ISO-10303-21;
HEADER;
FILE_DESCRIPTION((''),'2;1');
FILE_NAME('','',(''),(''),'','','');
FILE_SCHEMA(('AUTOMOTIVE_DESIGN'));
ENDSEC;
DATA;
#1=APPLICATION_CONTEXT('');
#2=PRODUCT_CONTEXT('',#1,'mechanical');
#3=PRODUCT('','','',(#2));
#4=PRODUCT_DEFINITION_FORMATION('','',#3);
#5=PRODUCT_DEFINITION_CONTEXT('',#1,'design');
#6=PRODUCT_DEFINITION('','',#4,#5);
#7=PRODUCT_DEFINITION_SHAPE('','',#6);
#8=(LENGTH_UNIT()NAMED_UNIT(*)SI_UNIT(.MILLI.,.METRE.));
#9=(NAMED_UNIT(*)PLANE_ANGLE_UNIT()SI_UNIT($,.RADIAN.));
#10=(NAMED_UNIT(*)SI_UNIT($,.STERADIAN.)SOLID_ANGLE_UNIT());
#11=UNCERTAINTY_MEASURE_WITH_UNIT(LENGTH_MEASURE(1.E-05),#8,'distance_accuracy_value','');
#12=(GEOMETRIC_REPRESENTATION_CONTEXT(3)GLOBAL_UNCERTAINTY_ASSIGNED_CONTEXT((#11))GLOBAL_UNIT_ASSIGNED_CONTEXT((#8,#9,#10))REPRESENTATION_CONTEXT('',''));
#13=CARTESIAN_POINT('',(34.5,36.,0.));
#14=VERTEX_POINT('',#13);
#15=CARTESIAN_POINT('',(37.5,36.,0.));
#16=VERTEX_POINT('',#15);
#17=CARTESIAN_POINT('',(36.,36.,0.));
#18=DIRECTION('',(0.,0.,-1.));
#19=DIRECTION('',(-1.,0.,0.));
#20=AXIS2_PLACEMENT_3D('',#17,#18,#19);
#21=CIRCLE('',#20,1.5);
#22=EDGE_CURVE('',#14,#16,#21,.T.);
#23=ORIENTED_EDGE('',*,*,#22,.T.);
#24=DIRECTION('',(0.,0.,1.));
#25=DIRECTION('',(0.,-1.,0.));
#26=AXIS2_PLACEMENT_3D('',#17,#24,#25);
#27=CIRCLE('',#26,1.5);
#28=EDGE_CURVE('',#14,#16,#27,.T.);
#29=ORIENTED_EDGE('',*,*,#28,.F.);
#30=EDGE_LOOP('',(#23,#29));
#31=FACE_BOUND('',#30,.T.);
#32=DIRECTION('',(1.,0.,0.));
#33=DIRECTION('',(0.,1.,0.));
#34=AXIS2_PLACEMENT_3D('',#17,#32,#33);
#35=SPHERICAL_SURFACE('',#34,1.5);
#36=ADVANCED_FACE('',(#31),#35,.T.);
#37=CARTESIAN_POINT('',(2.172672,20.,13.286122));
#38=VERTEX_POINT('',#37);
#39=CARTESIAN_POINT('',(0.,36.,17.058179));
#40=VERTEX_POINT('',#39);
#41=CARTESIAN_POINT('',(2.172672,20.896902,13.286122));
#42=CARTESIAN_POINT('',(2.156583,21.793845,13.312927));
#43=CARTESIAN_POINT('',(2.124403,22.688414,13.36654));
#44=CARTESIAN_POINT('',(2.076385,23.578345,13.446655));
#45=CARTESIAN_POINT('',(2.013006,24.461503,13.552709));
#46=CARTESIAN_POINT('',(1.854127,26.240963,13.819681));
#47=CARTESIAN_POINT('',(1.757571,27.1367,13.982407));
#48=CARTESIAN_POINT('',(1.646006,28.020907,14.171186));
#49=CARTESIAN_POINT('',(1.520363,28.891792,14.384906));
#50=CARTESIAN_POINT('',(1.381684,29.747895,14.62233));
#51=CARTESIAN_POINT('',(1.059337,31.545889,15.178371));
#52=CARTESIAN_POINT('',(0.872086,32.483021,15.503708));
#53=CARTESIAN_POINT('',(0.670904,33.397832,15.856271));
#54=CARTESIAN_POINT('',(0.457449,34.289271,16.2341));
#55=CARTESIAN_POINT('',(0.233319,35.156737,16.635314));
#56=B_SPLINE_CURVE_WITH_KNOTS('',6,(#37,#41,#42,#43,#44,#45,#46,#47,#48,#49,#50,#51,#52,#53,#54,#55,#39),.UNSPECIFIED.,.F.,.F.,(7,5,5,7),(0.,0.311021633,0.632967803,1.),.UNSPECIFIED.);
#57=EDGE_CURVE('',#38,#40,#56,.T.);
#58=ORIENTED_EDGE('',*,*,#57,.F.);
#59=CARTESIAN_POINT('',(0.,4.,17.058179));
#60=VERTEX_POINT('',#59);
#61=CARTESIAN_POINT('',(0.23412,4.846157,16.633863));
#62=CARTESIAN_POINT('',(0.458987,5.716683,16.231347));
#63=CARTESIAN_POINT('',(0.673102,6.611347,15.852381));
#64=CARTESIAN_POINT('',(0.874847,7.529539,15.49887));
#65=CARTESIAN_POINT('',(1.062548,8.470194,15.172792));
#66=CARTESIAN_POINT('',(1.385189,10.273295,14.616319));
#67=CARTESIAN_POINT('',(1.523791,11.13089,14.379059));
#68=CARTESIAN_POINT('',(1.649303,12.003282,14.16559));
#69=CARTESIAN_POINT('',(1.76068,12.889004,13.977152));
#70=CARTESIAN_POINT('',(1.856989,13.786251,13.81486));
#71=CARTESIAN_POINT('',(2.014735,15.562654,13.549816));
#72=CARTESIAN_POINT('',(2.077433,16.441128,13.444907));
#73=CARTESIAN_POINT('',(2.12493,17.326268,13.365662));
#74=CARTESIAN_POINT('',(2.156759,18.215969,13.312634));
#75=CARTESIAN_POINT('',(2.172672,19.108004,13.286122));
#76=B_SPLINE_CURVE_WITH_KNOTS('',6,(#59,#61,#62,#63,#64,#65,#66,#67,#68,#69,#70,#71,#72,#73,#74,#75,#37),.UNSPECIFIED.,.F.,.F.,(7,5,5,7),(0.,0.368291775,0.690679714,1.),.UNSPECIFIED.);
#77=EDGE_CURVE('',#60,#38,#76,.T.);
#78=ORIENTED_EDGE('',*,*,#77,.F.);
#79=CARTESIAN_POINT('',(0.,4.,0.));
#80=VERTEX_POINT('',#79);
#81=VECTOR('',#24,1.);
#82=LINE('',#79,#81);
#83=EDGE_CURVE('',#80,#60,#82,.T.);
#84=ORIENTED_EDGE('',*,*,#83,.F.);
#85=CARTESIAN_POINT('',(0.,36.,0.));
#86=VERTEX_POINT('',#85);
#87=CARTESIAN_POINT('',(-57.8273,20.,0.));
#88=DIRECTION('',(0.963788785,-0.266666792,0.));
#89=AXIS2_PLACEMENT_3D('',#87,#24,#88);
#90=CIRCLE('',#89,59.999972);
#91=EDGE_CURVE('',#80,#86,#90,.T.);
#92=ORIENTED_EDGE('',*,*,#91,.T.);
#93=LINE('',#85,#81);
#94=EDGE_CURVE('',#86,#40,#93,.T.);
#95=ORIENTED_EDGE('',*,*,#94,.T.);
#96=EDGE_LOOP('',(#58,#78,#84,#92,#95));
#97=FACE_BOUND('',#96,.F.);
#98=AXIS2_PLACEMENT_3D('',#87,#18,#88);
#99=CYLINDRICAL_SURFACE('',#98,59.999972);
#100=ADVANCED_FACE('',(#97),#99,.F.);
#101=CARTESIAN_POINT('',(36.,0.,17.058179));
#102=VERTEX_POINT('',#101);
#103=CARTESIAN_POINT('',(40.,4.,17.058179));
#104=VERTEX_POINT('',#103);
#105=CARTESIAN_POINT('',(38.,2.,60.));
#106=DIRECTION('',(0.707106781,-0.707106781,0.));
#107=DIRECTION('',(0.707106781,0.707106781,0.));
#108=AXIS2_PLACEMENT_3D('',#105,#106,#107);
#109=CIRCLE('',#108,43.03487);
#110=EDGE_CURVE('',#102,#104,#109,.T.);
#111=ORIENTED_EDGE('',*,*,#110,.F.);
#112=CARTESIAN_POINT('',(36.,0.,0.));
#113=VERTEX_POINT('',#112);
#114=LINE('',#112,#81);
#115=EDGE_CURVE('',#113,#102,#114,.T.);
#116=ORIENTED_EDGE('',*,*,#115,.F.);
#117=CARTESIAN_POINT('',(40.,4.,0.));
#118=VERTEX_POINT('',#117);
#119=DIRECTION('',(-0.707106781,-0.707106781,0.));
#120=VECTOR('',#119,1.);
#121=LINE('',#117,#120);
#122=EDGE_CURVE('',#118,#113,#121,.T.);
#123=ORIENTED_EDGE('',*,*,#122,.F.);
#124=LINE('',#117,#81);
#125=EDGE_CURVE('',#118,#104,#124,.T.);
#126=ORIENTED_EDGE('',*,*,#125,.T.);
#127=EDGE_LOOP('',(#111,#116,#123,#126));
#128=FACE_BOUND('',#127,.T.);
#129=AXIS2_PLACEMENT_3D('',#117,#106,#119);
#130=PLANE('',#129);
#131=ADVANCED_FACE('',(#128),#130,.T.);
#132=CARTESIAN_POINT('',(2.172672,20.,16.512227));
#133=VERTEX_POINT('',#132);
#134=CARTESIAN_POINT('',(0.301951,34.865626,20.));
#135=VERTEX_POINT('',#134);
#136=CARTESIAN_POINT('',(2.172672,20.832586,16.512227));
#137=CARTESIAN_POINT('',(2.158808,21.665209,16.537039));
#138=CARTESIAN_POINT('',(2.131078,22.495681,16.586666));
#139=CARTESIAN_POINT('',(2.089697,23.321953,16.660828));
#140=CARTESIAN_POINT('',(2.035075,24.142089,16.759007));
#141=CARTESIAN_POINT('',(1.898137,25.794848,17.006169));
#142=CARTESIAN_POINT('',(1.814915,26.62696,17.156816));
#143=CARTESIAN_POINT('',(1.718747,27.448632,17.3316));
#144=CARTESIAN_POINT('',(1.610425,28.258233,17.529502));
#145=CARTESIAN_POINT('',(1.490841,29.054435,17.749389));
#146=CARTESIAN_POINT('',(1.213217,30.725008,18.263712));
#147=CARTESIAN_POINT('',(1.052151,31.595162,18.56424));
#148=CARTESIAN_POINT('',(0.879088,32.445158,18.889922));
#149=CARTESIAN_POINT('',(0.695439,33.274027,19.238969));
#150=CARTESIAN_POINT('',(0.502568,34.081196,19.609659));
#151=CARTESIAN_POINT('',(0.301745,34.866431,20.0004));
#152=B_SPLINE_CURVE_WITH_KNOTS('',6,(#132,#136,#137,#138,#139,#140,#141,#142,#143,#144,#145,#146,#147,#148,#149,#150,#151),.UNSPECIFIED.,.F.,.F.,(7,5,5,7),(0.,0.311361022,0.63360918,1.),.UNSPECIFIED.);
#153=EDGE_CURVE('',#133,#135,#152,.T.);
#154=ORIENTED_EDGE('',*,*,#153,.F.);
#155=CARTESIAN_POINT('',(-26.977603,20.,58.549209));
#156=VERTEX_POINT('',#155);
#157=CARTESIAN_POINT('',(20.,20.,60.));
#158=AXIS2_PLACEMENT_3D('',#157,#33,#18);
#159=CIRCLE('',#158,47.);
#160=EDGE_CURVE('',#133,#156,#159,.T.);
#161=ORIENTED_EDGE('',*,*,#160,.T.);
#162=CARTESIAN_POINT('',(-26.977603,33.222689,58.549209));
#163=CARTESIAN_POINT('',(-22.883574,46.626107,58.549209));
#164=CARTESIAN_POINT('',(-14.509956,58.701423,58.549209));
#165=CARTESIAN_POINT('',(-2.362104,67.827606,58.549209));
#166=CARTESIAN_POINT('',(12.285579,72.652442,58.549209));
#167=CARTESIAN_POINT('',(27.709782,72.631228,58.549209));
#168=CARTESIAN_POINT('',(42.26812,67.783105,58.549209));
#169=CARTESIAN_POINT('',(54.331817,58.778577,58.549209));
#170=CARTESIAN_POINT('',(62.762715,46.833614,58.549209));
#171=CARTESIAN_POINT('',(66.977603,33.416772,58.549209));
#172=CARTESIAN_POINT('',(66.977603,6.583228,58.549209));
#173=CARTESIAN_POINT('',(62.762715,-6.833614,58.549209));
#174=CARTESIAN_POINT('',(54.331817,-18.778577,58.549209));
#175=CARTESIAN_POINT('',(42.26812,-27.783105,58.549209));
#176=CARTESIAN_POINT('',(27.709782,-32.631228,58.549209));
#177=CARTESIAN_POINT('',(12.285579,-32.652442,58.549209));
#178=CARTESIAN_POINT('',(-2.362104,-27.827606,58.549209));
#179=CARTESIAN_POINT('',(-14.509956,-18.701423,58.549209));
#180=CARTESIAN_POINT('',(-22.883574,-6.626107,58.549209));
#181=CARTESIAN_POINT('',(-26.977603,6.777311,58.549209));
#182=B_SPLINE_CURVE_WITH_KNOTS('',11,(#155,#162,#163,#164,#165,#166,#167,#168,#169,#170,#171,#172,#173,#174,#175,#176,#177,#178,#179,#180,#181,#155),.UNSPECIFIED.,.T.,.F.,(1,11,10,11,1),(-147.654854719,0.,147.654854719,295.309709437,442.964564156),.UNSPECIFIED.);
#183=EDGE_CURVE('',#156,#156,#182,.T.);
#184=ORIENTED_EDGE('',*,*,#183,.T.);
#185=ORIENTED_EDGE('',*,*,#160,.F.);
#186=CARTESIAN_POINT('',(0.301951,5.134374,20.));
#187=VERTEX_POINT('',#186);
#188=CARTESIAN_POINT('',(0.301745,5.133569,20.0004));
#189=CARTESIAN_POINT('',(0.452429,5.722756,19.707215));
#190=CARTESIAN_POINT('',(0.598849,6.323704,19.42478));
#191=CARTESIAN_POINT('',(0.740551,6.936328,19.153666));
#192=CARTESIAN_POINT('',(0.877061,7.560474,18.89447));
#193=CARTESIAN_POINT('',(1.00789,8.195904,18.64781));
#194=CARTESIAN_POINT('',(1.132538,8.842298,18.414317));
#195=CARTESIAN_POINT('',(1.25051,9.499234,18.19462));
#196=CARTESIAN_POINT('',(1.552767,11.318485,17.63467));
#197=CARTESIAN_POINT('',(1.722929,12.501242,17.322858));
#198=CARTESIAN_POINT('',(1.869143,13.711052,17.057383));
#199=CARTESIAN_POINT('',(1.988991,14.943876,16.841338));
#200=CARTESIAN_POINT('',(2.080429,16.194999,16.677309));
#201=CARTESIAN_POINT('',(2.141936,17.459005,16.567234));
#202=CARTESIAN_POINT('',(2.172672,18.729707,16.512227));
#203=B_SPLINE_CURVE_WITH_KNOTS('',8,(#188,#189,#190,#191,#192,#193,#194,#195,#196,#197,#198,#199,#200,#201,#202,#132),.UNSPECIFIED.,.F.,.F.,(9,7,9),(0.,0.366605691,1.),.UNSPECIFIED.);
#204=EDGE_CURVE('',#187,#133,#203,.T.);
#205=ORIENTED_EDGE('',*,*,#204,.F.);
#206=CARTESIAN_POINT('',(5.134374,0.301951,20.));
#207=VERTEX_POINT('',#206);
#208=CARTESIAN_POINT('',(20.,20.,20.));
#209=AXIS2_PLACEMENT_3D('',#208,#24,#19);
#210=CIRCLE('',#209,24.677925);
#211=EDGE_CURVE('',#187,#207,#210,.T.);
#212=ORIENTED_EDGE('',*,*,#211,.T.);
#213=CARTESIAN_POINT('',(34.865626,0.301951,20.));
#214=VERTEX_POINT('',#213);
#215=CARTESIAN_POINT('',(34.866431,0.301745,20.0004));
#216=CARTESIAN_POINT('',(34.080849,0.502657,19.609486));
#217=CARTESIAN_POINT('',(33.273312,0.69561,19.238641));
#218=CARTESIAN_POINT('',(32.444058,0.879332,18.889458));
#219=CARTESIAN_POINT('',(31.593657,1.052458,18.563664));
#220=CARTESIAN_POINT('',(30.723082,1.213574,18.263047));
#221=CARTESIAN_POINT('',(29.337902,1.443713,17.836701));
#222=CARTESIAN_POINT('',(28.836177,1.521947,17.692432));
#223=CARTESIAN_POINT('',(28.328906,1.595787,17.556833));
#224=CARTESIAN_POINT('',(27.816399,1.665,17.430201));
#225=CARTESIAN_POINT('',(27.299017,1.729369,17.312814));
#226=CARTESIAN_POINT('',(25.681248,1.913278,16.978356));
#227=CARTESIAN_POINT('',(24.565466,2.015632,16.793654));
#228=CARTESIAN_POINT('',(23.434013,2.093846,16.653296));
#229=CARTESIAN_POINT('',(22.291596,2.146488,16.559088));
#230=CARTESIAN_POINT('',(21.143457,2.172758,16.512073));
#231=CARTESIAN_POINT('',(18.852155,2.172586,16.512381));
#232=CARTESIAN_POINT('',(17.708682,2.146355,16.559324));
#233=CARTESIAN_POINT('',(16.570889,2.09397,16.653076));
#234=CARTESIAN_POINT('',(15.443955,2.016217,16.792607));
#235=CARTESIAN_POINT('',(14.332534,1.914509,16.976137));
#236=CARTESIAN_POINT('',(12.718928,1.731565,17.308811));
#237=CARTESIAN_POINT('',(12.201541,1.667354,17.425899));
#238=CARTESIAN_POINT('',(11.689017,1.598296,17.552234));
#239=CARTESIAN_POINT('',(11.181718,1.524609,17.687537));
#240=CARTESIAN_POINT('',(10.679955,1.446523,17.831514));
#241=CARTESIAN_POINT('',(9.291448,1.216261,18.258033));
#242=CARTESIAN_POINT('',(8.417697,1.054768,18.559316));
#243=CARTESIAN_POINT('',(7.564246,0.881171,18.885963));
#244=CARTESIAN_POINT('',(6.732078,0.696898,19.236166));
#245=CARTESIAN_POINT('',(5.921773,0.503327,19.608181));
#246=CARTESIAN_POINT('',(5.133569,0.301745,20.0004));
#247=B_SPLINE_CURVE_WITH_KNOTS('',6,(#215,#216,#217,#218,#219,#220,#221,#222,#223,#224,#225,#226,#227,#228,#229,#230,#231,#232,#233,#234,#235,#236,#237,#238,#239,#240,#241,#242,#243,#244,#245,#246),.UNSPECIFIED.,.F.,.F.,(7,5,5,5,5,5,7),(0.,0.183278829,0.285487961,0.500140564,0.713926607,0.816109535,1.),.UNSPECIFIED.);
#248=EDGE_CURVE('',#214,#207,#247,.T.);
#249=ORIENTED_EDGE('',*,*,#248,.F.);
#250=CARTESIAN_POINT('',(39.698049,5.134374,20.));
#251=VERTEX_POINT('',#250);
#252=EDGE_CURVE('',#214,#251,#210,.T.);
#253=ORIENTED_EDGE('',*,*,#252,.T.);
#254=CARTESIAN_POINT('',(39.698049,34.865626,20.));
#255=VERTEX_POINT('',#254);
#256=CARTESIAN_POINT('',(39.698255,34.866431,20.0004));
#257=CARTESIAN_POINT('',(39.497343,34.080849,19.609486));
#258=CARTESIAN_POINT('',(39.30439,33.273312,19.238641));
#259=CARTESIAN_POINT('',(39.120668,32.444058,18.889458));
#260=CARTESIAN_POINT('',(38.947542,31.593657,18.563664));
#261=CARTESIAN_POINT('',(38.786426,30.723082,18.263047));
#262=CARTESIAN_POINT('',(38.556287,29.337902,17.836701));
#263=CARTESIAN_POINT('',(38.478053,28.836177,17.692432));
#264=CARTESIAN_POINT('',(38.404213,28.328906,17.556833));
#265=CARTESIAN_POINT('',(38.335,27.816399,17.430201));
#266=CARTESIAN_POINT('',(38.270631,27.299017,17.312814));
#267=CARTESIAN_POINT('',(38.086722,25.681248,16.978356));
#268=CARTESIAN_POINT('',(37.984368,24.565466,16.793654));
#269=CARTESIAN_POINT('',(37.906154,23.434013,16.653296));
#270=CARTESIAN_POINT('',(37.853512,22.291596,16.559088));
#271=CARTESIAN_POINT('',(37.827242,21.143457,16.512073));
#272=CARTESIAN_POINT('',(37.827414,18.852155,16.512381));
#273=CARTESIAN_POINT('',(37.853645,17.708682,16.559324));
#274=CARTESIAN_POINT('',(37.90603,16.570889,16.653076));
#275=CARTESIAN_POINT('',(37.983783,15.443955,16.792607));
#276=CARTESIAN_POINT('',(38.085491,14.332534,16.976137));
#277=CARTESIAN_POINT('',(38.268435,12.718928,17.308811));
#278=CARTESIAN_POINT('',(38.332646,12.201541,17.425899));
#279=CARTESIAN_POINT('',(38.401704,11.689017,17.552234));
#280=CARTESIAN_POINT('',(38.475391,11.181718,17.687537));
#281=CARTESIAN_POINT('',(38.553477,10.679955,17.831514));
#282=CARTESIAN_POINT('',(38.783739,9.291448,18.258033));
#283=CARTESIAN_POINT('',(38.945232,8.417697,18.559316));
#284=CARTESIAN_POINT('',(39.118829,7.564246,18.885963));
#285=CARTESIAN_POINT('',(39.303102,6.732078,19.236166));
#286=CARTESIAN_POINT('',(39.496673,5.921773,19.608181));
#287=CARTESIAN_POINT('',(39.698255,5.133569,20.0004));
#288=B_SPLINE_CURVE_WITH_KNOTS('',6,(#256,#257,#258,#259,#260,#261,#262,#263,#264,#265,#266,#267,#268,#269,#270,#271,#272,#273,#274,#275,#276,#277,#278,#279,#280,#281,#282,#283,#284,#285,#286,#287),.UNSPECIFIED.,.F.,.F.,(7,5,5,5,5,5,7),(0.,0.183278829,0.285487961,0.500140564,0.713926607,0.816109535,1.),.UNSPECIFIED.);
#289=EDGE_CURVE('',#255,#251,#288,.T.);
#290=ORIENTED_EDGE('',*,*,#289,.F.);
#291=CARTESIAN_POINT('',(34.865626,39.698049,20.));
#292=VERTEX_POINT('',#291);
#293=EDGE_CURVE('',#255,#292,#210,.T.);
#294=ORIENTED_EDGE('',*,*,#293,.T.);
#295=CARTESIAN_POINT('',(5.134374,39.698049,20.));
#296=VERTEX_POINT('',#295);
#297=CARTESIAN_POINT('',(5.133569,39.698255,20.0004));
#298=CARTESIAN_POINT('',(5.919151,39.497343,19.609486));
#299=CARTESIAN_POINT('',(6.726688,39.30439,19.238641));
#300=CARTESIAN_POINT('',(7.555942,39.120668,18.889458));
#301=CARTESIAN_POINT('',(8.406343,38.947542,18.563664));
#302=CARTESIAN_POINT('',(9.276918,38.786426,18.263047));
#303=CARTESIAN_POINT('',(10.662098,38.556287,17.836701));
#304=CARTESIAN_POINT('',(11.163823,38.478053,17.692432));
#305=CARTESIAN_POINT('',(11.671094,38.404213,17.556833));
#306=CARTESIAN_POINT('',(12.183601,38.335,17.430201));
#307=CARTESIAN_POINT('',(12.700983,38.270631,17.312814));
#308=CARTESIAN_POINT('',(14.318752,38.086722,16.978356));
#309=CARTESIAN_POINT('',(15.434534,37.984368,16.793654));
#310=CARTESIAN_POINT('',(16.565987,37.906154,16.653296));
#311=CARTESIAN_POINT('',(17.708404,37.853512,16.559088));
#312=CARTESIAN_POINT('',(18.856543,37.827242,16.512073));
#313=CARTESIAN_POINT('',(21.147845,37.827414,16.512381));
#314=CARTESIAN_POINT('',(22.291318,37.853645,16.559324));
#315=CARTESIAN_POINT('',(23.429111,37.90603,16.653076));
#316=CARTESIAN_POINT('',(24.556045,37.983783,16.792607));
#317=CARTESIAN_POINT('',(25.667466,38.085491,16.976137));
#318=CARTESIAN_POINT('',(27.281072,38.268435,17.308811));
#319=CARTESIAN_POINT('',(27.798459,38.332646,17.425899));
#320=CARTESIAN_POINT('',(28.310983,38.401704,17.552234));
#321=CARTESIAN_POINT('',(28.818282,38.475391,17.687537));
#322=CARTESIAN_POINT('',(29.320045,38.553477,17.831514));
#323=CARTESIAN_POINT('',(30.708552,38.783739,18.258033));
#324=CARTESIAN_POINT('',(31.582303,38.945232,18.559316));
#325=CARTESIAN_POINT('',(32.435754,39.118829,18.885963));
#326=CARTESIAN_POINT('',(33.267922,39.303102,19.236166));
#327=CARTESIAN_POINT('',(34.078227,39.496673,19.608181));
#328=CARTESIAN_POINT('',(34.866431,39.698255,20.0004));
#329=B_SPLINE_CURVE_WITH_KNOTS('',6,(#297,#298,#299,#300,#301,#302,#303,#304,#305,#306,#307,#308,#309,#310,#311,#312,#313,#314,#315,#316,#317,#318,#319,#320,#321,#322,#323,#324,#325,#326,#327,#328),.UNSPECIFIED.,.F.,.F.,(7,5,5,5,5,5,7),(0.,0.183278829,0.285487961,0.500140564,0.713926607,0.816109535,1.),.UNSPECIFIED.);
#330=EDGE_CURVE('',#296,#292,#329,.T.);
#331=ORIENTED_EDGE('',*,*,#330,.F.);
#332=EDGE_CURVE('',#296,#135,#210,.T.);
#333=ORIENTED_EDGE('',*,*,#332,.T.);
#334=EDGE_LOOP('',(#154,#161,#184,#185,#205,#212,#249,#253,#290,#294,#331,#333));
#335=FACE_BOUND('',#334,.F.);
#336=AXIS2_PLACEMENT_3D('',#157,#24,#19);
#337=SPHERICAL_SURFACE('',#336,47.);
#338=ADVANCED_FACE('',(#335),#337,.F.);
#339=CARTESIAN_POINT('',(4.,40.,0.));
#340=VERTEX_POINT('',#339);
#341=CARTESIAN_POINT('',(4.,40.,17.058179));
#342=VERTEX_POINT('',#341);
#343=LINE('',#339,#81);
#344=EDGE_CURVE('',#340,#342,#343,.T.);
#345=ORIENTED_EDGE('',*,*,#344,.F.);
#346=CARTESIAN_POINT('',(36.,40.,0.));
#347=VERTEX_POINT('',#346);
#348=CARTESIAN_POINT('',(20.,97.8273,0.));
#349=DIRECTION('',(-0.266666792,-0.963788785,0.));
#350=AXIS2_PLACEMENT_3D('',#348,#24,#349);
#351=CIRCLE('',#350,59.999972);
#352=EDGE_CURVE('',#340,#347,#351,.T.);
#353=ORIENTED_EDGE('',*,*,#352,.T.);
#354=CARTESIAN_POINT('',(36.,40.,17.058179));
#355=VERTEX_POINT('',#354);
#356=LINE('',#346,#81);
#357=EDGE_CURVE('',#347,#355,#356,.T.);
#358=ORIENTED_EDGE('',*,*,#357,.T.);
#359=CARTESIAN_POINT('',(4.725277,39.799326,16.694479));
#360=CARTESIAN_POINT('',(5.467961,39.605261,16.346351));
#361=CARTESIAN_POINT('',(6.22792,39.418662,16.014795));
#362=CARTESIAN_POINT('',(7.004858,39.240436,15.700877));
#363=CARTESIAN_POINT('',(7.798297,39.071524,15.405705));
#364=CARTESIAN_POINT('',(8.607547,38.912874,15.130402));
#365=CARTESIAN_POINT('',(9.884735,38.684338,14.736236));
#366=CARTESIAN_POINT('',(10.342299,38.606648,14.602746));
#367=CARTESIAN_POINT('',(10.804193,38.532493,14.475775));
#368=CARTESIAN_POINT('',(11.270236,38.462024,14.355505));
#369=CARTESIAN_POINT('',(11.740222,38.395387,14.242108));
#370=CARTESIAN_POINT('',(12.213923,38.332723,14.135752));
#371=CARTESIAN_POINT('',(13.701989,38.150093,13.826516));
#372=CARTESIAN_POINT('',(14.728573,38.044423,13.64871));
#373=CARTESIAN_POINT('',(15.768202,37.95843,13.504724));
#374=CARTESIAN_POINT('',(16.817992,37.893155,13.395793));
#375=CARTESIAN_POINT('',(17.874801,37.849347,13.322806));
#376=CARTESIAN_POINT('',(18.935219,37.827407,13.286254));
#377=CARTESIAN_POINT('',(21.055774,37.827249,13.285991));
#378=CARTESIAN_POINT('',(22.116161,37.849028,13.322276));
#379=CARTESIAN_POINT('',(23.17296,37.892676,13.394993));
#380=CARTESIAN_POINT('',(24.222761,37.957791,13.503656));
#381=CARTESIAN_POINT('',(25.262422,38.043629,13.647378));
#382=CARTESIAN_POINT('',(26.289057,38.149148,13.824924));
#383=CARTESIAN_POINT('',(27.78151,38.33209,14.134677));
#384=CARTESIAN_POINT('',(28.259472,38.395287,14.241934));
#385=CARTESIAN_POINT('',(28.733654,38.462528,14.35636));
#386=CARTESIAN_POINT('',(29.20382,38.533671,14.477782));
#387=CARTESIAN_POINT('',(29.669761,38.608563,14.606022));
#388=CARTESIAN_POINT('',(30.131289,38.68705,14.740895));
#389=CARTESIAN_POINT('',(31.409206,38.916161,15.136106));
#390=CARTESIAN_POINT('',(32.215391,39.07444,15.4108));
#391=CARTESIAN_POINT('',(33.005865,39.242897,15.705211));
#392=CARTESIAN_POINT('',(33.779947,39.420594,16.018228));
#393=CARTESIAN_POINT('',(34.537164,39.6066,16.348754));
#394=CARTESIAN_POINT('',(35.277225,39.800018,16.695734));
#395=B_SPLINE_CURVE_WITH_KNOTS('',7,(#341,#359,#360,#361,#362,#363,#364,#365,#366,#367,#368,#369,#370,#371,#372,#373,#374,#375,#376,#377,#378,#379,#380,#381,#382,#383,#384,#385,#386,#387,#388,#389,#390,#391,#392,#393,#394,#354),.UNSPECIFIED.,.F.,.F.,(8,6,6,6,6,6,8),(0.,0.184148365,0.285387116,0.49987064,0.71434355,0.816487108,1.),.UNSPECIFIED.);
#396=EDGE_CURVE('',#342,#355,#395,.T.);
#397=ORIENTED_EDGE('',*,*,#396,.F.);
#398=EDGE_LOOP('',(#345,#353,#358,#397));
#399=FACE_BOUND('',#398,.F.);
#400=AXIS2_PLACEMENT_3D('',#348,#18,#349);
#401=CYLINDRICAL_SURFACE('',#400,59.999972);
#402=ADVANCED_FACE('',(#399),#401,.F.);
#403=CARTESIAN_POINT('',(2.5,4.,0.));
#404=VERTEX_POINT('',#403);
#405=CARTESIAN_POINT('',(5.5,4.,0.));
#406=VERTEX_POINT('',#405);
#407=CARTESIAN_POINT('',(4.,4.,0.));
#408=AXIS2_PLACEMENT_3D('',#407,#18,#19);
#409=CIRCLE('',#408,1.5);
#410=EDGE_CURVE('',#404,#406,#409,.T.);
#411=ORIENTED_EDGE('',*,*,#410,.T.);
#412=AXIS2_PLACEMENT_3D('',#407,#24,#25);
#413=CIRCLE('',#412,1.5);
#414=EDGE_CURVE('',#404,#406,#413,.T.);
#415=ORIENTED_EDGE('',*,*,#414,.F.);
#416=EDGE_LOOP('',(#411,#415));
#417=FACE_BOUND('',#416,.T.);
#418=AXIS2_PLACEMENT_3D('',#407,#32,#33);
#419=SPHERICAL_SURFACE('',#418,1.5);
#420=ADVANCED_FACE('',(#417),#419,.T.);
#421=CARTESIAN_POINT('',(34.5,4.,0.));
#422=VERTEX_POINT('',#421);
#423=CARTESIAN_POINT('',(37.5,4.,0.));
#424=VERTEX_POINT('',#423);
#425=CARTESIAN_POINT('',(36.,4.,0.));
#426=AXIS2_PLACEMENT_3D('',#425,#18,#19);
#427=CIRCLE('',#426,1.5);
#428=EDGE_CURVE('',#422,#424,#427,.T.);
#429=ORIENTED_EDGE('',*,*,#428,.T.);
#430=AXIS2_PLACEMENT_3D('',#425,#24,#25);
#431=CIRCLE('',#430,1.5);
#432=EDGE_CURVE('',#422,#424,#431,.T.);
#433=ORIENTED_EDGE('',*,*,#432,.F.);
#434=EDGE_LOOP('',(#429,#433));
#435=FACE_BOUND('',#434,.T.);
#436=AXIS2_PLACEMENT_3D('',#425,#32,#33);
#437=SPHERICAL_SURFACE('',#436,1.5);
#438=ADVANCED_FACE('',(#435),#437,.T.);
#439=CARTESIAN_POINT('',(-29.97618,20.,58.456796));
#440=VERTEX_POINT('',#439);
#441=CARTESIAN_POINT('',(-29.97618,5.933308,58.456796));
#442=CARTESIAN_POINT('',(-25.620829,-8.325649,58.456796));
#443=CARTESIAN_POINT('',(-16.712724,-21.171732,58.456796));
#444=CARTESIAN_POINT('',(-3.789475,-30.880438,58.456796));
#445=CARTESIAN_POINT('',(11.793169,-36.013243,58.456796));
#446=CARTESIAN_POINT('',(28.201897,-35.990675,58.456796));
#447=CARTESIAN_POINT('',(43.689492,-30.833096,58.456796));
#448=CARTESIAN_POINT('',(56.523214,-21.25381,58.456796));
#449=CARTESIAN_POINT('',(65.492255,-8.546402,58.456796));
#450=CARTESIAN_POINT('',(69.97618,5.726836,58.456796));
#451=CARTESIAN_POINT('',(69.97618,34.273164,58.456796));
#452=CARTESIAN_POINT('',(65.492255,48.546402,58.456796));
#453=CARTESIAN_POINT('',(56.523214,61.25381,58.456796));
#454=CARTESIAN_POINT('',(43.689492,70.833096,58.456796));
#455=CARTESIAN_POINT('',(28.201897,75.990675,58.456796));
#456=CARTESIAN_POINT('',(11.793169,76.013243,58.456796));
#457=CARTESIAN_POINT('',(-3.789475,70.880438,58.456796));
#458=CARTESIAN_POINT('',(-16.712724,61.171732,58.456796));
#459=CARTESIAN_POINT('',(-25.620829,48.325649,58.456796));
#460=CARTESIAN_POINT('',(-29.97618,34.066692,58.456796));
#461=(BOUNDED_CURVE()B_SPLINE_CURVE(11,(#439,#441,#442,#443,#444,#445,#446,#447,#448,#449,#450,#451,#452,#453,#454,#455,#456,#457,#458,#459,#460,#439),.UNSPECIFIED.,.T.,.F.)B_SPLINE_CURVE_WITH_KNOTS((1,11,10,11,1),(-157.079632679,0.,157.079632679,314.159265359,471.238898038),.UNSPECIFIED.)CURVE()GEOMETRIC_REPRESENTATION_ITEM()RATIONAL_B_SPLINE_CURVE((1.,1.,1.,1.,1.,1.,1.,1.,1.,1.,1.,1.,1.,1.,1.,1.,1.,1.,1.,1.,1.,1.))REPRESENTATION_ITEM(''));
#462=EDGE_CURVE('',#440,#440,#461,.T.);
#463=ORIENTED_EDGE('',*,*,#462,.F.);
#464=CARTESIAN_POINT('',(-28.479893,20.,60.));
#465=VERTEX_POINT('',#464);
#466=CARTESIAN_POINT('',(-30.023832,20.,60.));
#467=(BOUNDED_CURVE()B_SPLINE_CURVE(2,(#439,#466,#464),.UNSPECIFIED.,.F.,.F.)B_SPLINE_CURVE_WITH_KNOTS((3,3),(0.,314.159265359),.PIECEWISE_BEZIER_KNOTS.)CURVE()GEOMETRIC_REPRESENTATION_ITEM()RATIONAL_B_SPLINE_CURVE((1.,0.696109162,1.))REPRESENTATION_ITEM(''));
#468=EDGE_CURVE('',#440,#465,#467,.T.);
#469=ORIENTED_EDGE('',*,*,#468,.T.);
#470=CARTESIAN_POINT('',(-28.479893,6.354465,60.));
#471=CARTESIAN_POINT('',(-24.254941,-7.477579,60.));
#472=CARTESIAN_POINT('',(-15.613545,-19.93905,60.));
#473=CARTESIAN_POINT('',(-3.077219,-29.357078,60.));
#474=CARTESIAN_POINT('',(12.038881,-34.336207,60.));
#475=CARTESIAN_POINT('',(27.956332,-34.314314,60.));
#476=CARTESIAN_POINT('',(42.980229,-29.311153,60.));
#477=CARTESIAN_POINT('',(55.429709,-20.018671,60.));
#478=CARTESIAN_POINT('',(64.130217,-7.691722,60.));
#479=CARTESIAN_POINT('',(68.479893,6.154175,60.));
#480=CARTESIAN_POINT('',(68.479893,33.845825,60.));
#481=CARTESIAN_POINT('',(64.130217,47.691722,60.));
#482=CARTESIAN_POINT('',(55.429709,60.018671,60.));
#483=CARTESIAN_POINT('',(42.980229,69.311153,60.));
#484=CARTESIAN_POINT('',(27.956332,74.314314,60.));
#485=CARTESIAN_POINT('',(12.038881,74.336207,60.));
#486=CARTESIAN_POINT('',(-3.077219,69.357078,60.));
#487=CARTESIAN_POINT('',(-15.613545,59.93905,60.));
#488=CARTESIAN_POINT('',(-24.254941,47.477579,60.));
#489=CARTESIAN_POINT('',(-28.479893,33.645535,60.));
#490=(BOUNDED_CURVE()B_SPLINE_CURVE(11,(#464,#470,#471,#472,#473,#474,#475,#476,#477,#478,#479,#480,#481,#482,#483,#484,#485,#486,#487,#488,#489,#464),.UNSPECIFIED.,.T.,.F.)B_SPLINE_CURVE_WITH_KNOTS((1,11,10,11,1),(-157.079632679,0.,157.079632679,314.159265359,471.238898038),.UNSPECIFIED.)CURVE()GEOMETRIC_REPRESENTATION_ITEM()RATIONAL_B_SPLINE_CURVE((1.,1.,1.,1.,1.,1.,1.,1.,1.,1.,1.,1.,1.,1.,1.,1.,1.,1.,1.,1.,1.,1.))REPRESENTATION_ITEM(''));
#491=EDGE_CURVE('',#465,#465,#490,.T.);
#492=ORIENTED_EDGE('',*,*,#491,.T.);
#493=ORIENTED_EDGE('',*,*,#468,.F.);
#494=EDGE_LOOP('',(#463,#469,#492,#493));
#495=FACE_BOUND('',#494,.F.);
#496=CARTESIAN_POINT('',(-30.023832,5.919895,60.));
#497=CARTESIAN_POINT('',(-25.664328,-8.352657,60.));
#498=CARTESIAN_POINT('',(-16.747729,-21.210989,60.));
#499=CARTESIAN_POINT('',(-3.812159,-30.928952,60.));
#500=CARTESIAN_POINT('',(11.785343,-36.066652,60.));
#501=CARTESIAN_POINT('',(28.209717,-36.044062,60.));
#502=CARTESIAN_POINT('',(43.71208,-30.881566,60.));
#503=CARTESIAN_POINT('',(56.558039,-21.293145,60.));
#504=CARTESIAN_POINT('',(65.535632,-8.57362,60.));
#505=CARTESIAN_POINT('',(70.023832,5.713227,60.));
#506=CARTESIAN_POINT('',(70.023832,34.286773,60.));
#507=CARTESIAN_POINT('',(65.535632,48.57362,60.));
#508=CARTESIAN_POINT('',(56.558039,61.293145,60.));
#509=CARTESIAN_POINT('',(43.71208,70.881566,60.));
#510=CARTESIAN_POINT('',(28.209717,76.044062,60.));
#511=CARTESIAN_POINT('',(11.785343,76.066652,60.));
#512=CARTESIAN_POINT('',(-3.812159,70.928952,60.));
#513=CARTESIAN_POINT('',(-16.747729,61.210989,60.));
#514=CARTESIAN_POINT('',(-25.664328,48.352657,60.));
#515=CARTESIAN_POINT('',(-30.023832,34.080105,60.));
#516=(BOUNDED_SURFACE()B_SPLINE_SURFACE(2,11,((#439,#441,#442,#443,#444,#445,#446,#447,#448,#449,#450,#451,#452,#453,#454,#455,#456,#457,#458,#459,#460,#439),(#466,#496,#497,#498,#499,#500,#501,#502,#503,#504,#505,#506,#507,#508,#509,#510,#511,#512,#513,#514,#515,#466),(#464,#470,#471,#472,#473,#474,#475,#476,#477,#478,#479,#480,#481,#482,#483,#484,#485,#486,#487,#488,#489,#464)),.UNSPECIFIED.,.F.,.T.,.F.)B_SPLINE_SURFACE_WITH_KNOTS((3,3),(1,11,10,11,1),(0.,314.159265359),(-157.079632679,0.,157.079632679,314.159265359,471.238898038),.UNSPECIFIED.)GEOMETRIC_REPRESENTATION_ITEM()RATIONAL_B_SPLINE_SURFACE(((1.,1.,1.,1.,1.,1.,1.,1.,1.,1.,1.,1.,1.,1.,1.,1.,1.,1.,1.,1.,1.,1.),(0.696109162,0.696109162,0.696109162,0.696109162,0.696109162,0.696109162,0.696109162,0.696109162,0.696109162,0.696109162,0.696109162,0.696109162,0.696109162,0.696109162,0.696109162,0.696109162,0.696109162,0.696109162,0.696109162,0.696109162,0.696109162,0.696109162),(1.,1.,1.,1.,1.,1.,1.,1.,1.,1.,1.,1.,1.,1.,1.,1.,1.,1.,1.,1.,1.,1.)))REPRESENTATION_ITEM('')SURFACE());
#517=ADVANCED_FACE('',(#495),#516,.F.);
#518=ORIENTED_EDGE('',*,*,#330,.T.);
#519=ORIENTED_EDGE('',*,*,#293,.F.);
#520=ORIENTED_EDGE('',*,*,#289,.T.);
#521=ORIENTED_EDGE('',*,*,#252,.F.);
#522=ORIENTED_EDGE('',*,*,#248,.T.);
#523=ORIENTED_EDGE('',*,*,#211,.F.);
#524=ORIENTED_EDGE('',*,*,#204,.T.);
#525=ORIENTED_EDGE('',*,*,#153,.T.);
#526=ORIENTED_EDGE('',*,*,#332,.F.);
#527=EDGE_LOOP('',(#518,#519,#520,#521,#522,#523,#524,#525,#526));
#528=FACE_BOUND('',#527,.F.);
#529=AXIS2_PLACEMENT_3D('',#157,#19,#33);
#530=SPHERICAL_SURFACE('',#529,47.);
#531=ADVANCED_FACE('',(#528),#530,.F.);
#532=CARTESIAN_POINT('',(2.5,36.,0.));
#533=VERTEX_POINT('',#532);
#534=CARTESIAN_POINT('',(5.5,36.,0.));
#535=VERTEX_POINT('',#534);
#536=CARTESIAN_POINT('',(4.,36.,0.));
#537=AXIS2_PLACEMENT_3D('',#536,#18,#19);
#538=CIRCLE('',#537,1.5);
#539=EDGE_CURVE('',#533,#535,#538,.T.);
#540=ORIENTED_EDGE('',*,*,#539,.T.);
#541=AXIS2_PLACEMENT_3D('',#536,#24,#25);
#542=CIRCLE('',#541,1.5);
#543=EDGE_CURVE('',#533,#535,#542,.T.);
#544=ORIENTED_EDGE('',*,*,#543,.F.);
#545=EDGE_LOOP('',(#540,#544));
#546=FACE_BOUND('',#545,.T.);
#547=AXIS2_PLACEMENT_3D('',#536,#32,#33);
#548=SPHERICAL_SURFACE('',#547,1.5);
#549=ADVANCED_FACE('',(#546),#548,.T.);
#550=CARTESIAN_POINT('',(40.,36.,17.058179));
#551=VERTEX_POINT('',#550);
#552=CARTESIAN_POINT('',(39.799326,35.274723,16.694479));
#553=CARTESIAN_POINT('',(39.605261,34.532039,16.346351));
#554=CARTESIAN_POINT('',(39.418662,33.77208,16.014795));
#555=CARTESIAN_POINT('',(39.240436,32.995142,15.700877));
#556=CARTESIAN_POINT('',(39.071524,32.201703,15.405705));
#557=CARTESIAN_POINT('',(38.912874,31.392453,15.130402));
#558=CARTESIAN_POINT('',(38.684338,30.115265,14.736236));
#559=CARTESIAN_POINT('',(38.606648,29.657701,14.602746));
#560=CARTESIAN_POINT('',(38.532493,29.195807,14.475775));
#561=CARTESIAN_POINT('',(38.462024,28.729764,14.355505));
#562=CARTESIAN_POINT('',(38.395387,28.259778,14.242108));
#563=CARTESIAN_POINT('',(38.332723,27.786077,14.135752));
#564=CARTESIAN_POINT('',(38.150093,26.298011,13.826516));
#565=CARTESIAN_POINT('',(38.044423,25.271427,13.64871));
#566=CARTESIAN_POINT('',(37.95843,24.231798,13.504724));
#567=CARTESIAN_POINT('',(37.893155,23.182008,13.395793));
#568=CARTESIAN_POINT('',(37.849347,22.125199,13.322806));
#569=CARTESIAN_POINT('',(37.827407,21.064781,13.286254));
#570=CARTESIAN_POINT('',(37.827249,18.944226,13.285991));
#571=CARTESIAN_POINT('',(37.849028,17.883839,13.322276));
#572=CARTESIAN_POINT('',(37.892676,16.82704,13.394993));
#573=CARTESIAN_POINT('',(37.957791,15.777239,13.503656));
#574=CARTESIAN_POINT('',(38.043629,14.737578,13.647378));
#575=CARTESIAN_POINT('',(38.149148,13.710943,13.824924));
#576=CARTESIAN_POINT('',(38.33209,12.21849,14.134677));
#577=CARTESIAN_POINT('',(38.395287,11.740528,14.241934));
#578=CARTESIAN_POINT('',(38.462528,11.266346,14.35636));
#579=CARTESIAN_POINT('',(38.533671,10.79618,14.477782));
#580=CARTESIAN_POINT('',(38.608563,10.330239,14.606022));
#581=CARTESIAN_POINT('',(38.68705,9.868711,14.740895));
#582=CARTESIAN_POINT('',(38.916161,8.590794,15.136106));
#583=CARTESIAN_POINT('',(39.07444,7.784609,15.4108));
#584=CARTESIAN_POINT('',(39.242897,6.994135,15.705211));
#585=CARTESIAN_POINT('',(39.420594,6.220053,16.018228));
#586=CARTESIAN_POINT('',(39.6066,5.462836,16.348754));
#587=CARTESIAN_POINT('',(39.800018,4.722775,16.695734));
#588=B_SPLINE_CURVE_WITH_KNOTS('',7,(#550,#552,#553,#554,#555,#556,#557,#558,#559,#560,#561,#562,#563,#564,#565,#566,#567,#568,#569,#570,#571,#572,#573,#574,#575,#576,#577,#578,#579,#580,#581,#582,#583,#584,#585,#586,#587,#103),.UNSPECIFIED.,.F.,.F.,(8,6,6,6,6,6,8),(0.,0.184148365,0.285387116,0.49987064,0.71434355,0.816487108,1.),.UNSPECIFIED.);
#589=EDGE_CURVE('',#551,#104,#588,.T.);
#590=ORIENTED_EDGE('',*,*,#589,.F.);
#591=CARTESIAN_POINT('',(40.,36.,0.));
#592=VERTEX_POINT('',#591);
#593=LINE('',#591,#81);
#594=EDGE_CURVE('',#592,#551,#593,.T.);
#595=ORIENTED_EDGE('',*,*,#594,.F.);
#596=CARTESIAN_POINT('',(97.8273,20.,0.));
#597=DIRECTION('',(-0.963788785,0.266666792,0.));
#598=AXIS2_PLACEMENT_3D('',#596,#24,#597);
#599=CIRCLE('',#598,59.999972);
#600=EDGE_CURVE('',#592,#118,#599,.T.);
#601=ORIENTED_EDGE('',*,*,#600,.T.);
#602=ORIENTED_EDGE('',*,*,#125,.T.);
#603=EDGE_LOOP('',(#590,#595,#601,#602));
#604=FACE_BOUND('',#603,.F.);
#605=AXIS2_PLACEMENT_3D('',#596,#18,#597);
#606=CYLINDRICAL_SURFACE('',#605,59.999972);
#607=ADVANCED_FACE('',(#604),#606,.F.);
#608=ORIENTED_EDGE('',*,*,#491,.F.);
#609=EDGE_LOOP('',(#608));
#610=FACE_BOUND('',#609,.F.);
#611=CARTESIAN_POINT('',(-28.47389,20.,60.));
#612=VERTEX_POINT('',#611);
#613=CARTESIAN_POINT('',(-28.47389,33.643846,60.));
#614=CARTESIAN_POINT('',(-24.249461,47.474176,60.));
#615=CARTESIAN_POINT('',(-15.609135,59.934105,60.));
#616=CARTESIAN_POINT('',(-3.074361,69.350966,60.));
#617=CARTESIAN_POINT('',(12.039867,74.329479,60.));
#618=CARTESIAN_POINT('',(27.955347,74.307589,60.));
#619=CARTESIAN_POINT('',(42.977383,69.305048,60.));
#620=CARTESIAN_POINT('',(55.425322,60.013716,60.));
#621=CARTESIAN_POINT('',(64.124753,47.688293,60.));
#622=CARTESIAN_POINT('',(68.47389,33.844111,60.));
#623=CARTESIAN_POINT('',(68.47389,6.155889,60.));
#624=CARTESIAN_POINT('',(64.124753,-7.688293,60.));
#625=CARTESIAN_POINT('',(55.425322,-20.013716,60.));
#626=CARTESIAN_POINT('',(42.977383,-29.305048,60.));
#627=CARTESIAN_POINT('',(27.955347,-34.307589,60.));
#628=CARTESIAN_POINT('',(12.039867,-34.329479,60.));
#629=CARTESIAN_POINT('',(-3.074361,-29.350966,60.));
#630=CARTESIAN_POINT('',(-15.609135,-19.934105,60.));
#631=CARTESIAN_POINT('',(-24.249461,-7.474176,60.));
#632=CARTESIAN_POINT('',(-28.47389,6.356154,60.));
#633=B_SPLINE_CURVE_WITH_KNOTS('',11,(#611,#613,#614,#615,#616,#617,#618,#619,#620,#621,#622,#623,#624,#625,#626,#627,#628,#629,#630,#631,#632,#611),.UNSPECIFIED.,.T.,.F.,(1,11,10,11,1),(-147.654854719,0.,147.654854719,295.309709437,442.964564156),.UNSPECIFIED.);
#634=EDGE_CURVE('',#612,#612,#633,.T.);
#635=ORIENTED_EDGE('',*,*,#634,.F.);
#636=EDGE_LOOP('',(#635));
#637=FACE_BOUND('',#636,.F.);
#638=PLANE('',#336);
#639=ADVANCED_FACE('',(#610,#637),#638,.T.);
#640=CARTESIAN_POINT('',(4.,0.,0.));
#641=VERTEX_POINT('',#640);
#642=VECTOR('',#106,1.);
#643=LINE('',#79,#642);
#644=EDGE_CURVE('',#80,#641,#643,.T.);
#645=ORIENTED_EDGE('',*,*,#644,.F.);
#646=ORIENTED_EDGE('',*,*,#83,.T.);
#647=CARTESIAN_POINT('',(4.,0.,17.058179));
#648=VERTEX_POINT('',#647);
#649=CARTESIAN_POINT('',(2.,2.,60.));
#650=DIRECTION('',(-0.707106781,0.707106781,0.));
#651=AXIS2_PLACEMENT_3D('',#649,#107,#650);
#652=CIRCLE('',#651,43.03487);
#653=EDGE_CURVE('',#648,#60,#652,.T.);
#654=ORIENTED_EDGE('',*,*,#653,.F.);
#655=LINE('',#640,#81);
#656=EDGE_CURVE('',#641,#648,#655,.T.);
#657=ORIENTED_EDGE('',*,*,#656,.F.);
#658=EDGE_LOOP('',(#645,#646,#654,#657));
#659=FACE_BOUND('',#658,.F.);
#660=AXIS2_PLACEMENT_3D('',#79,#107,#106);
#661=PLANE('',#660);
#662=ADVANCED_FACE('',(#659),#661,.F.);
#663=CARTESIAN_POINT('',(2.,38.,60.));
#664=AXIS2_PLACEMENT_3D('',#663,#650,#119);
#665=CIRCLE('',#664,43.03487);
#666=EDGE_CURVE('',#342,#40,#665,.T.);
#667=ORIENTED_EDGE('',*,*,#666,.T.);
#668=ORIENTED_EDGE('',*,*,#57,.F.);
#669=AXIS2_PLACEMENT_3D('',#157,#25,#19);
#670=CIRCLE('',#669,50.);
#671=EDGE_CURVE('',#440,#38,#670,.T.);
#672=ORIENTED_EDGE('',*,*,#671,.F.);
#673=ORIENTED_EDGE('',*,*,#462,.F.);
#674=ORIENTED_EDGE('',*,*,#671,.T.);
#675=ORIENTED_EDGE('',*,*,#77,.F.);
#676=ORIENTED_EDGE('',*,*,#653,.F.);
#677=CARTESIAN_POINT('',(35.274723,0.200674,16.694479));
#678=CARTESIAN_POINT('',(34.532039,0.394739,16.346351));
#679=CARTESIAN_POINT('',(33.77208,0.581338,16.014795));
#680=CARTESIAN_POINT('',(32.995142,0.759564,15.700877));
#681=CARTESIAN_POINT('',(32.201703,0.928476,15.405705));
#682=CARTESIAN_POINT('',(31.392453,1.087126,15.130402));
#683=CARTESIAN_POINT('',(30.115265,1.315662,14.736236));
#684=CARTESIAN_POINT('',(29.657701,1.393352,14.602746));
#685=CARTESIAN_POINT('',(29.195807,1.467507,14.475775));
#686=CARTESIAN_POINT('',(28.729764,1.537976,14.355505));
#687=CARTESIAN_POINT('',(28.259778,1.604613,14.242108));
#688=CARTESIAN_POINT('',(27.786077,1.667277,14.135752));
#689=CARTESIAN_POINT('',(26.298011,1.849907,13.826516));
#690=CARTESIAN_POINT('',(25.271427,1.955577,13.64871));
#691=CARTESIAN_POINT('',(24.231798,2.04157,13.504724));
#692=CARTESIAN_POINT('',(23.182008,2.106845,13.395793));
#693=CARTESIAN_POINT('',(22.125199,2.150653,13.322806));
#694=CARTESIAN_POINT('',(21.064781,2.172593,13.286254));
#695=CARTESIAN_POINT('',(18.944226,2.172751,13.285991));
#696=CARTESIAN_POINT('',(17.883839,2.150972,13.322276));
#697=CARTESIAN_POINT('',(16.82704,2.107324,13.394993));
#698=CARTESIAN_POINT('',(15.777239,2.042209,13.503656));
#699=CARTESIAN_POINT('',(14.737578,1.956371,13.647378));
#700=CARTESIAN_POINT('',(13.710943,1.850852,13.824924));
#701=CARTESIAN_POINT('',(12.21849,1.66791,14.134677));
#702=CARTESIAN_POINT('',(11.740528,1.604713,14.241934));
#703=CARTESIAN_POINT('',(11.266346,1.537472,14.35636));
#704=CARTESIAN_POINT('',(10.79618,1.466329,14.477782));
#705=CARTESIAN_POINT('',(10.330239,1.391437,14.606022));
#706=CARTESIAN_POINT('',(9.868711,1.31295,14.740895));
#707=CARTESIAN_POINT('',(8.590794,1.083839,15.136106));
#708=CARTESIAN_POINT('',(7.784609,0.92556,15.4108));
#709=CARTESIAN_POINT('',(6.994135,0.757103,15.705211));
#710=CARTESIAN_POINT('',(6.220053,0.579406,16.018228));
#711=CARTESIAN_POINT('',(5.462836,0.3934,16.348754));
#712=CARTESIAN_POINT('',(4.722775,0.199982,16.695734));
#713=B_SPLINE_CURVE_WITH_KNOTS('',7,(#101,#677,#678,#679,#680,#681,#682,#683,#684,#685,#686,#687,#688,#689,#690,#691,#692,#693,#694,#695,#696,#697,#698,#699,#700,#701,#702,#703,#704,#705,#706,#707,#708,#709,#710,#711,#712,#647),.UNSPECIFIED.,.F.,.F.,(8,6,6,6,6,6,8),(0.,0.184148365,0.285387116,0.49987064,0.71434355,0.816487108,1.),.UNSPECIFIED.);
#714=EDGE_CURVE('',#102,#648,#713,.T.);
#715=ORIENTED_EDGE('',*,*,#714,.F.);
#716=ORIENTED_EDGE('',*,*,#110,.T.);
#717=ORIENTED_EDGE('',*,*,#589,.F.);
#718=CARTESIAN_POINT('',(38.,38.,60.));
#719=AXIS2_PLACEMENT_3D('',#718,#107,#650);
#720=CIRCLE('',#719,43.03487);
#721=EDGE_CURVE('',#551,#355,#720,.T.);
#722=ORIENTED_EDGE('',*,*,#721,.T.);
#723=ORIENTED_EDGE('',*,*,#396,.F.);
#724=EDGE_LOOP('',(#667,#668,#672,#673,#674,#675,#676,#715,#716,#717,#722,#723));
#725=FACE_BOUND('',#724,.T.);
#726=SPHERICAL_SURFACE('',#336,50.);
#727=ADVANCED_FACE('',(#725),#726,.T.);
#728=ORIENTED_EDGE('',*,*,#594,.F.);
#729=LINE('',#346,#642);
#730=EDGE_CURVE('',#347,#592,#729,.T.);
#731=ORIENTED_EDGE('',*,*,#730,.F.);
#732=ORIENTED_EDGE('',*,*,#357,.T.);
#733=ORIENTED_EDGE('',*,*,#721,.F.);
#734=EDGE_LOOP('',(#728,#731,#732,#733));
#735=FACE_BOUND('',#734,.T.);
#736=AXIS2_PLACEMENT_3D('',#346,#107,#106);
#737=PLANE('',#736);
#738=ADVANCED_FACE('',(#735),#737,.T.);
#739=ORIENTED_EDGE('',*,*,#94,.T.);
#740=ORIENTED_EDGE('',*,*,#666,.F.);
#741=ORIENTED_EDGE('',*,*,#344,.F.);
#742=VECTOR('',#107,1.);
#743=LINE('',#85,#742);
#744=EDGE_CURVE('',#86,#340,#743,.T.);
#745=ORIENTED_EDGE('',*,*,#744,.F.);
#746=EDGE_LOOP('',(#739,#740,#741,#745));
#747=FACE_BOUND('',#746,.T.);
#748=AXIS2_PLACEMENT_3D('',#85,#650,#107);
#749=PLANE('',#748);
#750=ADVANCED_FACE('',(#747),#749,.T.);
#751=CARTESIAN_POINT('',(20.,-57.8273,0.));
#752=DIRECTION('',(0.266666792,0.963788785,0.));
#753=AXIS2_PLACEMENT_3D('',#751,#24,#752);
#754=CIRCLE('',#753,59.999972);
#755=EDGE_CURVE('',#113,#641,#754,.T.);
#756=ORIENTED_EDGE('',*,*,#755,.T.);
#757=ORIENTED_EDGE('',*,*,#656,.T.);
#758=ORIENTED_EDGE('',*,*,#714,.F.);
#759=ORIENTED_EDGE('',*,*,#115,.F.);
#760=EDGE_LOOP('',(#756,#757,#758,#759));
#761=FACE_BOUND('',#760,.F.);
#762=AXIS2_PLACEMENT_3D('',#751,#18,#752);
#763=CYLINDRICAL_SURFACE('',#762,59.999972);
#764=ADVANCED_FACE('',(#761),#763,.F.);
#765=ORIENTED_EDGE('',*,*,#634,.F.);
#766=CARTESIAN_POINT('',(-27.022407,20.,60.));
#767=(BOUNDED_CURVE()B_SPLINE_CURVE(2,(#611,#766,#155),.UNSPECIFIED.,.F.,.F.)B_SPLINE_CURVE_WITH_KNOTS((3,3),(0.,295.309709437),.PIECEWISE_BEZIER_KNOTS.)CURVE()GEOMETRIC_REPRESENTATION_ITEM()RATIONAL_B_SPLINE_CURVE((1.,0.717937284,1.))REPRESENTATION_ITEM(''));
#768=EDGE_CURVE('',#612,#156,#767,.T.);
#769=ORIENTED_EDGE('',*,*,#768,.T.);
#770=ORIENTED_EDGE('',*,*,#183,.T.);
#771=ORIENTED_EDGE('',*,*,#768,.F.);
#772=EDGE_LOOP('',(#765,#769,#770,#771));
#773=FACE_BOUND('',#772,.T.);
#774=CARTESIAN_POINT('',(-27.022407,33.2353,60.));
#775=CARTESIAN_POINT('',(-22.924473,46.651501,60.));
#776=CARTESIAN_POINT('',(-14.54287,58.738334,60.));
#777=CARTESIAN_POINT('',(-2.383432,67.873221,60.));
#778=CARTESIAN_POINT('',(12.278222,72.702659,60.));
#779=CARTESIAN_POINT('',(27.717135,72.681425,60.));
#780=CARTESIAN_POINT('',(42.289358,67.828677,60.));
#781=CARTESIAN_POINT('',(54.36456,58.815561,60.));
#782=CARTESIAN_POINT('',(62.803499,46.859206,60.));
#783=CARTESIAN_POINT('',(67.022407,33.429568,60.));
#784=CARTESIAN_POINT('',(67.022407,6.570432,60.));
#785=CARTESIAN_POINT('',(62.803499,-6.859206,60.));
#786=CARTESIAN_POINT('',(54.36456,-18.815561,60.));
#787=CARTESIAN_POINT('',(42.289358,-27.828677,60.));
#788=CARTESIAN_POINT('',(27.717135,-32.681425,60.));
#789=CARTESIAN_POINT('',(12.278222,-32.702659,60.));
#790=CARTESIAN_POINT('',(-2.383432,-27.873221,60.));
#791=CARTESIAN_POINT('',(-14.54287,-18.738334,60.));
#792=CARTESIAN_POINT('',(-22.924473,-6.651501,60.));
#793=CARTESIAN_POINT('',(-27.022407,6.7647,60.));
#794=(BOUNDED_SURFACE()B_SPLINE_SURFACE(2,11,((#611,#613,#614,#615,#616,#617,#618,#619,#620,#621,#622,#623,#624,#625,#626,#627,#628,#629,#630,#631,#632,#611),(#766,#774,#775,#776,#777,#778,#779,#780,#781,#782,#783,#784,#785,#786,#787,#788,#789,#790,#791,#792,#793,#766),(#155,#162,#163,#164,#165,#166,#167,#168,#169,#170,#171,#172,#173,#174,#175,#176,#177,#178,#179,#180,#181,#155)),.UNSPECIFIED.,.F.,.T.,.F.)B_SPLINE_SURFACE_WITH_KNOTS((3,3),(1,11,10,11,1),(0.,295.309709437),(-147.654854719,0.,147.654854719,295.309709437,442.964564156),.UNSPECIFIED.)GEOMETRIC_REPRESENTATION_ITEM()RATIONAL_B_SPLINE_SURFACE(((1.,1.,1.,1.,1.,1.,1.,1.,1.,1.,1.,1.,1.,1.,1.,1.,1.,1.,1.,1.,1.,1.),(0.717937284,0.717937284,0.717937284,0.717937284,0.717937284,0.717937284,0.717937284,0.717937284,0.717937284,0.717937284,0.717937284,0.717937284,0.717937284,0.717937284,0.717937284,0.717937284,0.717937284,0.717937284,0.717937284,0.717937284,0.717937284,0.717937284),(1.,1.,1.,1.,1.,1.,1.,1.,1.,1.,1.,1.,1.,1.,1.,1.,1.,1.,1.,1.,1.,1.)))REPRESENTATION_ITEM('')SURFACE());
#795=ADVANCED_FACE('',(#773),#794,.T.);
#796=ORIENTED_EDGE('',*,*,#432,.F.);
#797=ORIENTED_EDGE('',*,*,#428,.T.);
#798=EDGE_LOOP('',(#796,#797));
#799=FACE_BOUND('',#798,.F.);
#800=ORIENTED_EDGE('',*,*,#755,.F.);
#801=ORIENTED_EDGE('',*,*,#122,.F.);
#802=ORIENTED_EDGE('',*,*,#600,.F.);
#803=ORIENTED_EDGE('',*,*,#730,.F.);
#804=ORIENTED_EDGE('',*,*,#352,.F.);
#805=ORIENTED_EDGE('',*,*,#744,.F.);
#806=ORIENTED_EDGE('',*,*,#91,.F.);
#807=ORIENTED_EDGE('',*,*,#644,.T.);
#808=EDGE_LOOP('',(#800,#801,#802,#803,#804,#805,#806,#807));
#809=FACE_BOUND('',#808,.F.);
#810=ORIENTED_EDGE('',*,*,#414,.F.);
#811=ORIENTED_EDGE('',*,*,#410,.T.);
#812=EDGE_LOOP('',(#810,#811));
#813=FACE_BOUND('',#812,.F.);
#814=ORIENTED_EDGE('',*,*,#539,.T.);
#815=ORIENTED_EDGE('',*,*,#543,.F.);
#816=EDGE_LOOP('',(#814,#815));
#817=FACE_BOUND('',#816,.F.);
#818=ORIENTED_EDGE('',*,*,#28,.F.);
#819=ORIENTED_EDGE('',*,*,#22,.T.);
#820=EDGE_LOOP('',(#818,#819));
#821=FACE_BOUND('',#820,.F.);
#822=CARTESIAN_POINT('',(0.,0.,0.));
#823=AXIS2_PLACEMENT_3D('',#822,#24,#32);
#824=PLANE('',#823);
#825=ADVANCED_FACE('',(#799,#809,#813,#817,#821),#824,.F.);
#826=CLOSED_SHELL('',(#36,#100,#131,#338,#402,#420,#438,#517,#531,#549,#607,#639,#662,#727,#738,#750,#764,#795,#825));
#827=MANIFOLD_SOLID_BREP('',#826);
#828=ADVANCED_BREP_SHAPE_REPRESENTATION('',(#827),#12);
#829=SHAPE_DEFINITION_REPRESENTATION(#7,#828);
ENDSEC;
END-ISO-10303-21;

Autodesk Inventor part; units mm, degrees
ref_plane "YZ Plane" through (0, 0, 0) normal (1, 0, 0) x (0, 1, 0)
ref_plane "XY Plane" through (0, 0, 0) normal (0, 0, 1) x (1, 0, 0)
sketch "Sketch1" plane through (0, 0, 0) normal (0, 0, 1) x (1, 0, 0)
  line L0 (0, 36) -> (4, 40)
  line L1 (0, 4) -> (4, 0)
  line L2 (40, 4) -> (36, 0)
  line L3 (36, 40) -> (40, 36)
  arc A0 (0, 4) -> (0, 36) centre (-57.8273, 20) ccw
  arc A1 (4, 40) -> (36, 40) centre (20, 97.8273) ccw
  arc A2 (36, 0) -> (4, 0) centre (20, -57.8273) ccw
  arc A3 (40, 36) -> (40, 4) centre (97.8273, 20) ccw
  point P0 (0, 0)
  point P1 (40, 40)
  point P2 (40, 0)
  point P3 (0, 40)
  dimension "d0" = 40
  dimension "d1" = 40
  dimension "d2" = 4
  dimension "d3" = 4
  dimension "d4" = 4
  dimension "d5" = 4
  dimension "d6" = 4
  dimension "d7" = 4
  dimension "d8" = 4
  dimension "d9" = 4
  dimension "d10" = 60
  dimension "d11" = 60
  dimension "d12" = 60
  dimension "d13" = 60
extrude "Extrusion1" add sketch "Sketch1" along normal blind 20
sketch "Sketch2" plane through (0, 0, 0) normal (0, 0, -1) x (-1, 0, 0)
  arc A0 (-34.5, 36) -> (-37.5, 36) centre (-36, 36) ccw
  line L0 (-37.5, 36) -> (-34.5, 36)
  point P0 (0, 0)
  dimension "d16" = 3
revolve "Revolution1" add sketch "Sketch2" angle 360 about axis through (37.5, 36, 0) along (-1, 0, 0)
pattern_linear "Rectangular Pattern1" count 2 spacing 32 along (-1, 0, 0) count 2 spacing 32 along (0, -1, 0) of "Revolution1"
ref_plane "Work Plane1" through (0, 20, 0) normal (0, 1, 0) x (-1, 0, 0)
sketch "Sketch3" plane through (0, 20, 0) normal (0, 1, 0) x (-1, 0, 0)
  line L0 (0, 0) -> (0, 20) projected
  line L1 (-40, 0) -> (-40, 20) projected
  arc A0 (-20, 10) -> (30, 60) centre (-20, 60) ccw
  arc A1 (-20, 13) -> (27, 60) centre (-20, 60) ccw
  line L2 (-20, 10) -> (-20, 13)
  line L3 (27, 60) -> (30, 60)
  dimension "d41" = 3
revolve "Revolution3" add sketch "Sketch3" angle 360 about axis through (20, 20, 10) along (0, 0, 1)
sketch "Sketch4" plane through (20, 20, 60) normal (0, 0, 1) x (1, 0, 0)
  circle A0 centre (0, 0) radius 47 projected
  circle A1 centre (0, 0) radius 50 projected
  arc A2 (47, 0) -> (-47, 0) centre (0, 0) ccw
  line L0 (0, 0) -> (47, 0)
  line L1 (-47, 0) -> (0, 0)
  point P0 (-20, -20)
revolve "Revolution4" cut sketch "Sketch4" angle 360 about axis through (20, 20, 60) along (1, 0, 0) picked at (-27.5005, 14.6993) contours L0 L1 A0
fillet "Fillet1" radius 1.5 2 edges at (70, 20, 60) (67, 20, 60)
equation "\"d3\" = d2"
equation "\"d4\" = d2"
equation "\"d5\" = d4"
equation "\"d6\" = d2"
equation "\"d7\" = d6"
equation "\"d8\" = d2"
equation "\"d9\" = d8"
equation "\"d12\" = d10"
equation "\"d13\" = d10"
properties part number "Bowlcup" material "Glass"
